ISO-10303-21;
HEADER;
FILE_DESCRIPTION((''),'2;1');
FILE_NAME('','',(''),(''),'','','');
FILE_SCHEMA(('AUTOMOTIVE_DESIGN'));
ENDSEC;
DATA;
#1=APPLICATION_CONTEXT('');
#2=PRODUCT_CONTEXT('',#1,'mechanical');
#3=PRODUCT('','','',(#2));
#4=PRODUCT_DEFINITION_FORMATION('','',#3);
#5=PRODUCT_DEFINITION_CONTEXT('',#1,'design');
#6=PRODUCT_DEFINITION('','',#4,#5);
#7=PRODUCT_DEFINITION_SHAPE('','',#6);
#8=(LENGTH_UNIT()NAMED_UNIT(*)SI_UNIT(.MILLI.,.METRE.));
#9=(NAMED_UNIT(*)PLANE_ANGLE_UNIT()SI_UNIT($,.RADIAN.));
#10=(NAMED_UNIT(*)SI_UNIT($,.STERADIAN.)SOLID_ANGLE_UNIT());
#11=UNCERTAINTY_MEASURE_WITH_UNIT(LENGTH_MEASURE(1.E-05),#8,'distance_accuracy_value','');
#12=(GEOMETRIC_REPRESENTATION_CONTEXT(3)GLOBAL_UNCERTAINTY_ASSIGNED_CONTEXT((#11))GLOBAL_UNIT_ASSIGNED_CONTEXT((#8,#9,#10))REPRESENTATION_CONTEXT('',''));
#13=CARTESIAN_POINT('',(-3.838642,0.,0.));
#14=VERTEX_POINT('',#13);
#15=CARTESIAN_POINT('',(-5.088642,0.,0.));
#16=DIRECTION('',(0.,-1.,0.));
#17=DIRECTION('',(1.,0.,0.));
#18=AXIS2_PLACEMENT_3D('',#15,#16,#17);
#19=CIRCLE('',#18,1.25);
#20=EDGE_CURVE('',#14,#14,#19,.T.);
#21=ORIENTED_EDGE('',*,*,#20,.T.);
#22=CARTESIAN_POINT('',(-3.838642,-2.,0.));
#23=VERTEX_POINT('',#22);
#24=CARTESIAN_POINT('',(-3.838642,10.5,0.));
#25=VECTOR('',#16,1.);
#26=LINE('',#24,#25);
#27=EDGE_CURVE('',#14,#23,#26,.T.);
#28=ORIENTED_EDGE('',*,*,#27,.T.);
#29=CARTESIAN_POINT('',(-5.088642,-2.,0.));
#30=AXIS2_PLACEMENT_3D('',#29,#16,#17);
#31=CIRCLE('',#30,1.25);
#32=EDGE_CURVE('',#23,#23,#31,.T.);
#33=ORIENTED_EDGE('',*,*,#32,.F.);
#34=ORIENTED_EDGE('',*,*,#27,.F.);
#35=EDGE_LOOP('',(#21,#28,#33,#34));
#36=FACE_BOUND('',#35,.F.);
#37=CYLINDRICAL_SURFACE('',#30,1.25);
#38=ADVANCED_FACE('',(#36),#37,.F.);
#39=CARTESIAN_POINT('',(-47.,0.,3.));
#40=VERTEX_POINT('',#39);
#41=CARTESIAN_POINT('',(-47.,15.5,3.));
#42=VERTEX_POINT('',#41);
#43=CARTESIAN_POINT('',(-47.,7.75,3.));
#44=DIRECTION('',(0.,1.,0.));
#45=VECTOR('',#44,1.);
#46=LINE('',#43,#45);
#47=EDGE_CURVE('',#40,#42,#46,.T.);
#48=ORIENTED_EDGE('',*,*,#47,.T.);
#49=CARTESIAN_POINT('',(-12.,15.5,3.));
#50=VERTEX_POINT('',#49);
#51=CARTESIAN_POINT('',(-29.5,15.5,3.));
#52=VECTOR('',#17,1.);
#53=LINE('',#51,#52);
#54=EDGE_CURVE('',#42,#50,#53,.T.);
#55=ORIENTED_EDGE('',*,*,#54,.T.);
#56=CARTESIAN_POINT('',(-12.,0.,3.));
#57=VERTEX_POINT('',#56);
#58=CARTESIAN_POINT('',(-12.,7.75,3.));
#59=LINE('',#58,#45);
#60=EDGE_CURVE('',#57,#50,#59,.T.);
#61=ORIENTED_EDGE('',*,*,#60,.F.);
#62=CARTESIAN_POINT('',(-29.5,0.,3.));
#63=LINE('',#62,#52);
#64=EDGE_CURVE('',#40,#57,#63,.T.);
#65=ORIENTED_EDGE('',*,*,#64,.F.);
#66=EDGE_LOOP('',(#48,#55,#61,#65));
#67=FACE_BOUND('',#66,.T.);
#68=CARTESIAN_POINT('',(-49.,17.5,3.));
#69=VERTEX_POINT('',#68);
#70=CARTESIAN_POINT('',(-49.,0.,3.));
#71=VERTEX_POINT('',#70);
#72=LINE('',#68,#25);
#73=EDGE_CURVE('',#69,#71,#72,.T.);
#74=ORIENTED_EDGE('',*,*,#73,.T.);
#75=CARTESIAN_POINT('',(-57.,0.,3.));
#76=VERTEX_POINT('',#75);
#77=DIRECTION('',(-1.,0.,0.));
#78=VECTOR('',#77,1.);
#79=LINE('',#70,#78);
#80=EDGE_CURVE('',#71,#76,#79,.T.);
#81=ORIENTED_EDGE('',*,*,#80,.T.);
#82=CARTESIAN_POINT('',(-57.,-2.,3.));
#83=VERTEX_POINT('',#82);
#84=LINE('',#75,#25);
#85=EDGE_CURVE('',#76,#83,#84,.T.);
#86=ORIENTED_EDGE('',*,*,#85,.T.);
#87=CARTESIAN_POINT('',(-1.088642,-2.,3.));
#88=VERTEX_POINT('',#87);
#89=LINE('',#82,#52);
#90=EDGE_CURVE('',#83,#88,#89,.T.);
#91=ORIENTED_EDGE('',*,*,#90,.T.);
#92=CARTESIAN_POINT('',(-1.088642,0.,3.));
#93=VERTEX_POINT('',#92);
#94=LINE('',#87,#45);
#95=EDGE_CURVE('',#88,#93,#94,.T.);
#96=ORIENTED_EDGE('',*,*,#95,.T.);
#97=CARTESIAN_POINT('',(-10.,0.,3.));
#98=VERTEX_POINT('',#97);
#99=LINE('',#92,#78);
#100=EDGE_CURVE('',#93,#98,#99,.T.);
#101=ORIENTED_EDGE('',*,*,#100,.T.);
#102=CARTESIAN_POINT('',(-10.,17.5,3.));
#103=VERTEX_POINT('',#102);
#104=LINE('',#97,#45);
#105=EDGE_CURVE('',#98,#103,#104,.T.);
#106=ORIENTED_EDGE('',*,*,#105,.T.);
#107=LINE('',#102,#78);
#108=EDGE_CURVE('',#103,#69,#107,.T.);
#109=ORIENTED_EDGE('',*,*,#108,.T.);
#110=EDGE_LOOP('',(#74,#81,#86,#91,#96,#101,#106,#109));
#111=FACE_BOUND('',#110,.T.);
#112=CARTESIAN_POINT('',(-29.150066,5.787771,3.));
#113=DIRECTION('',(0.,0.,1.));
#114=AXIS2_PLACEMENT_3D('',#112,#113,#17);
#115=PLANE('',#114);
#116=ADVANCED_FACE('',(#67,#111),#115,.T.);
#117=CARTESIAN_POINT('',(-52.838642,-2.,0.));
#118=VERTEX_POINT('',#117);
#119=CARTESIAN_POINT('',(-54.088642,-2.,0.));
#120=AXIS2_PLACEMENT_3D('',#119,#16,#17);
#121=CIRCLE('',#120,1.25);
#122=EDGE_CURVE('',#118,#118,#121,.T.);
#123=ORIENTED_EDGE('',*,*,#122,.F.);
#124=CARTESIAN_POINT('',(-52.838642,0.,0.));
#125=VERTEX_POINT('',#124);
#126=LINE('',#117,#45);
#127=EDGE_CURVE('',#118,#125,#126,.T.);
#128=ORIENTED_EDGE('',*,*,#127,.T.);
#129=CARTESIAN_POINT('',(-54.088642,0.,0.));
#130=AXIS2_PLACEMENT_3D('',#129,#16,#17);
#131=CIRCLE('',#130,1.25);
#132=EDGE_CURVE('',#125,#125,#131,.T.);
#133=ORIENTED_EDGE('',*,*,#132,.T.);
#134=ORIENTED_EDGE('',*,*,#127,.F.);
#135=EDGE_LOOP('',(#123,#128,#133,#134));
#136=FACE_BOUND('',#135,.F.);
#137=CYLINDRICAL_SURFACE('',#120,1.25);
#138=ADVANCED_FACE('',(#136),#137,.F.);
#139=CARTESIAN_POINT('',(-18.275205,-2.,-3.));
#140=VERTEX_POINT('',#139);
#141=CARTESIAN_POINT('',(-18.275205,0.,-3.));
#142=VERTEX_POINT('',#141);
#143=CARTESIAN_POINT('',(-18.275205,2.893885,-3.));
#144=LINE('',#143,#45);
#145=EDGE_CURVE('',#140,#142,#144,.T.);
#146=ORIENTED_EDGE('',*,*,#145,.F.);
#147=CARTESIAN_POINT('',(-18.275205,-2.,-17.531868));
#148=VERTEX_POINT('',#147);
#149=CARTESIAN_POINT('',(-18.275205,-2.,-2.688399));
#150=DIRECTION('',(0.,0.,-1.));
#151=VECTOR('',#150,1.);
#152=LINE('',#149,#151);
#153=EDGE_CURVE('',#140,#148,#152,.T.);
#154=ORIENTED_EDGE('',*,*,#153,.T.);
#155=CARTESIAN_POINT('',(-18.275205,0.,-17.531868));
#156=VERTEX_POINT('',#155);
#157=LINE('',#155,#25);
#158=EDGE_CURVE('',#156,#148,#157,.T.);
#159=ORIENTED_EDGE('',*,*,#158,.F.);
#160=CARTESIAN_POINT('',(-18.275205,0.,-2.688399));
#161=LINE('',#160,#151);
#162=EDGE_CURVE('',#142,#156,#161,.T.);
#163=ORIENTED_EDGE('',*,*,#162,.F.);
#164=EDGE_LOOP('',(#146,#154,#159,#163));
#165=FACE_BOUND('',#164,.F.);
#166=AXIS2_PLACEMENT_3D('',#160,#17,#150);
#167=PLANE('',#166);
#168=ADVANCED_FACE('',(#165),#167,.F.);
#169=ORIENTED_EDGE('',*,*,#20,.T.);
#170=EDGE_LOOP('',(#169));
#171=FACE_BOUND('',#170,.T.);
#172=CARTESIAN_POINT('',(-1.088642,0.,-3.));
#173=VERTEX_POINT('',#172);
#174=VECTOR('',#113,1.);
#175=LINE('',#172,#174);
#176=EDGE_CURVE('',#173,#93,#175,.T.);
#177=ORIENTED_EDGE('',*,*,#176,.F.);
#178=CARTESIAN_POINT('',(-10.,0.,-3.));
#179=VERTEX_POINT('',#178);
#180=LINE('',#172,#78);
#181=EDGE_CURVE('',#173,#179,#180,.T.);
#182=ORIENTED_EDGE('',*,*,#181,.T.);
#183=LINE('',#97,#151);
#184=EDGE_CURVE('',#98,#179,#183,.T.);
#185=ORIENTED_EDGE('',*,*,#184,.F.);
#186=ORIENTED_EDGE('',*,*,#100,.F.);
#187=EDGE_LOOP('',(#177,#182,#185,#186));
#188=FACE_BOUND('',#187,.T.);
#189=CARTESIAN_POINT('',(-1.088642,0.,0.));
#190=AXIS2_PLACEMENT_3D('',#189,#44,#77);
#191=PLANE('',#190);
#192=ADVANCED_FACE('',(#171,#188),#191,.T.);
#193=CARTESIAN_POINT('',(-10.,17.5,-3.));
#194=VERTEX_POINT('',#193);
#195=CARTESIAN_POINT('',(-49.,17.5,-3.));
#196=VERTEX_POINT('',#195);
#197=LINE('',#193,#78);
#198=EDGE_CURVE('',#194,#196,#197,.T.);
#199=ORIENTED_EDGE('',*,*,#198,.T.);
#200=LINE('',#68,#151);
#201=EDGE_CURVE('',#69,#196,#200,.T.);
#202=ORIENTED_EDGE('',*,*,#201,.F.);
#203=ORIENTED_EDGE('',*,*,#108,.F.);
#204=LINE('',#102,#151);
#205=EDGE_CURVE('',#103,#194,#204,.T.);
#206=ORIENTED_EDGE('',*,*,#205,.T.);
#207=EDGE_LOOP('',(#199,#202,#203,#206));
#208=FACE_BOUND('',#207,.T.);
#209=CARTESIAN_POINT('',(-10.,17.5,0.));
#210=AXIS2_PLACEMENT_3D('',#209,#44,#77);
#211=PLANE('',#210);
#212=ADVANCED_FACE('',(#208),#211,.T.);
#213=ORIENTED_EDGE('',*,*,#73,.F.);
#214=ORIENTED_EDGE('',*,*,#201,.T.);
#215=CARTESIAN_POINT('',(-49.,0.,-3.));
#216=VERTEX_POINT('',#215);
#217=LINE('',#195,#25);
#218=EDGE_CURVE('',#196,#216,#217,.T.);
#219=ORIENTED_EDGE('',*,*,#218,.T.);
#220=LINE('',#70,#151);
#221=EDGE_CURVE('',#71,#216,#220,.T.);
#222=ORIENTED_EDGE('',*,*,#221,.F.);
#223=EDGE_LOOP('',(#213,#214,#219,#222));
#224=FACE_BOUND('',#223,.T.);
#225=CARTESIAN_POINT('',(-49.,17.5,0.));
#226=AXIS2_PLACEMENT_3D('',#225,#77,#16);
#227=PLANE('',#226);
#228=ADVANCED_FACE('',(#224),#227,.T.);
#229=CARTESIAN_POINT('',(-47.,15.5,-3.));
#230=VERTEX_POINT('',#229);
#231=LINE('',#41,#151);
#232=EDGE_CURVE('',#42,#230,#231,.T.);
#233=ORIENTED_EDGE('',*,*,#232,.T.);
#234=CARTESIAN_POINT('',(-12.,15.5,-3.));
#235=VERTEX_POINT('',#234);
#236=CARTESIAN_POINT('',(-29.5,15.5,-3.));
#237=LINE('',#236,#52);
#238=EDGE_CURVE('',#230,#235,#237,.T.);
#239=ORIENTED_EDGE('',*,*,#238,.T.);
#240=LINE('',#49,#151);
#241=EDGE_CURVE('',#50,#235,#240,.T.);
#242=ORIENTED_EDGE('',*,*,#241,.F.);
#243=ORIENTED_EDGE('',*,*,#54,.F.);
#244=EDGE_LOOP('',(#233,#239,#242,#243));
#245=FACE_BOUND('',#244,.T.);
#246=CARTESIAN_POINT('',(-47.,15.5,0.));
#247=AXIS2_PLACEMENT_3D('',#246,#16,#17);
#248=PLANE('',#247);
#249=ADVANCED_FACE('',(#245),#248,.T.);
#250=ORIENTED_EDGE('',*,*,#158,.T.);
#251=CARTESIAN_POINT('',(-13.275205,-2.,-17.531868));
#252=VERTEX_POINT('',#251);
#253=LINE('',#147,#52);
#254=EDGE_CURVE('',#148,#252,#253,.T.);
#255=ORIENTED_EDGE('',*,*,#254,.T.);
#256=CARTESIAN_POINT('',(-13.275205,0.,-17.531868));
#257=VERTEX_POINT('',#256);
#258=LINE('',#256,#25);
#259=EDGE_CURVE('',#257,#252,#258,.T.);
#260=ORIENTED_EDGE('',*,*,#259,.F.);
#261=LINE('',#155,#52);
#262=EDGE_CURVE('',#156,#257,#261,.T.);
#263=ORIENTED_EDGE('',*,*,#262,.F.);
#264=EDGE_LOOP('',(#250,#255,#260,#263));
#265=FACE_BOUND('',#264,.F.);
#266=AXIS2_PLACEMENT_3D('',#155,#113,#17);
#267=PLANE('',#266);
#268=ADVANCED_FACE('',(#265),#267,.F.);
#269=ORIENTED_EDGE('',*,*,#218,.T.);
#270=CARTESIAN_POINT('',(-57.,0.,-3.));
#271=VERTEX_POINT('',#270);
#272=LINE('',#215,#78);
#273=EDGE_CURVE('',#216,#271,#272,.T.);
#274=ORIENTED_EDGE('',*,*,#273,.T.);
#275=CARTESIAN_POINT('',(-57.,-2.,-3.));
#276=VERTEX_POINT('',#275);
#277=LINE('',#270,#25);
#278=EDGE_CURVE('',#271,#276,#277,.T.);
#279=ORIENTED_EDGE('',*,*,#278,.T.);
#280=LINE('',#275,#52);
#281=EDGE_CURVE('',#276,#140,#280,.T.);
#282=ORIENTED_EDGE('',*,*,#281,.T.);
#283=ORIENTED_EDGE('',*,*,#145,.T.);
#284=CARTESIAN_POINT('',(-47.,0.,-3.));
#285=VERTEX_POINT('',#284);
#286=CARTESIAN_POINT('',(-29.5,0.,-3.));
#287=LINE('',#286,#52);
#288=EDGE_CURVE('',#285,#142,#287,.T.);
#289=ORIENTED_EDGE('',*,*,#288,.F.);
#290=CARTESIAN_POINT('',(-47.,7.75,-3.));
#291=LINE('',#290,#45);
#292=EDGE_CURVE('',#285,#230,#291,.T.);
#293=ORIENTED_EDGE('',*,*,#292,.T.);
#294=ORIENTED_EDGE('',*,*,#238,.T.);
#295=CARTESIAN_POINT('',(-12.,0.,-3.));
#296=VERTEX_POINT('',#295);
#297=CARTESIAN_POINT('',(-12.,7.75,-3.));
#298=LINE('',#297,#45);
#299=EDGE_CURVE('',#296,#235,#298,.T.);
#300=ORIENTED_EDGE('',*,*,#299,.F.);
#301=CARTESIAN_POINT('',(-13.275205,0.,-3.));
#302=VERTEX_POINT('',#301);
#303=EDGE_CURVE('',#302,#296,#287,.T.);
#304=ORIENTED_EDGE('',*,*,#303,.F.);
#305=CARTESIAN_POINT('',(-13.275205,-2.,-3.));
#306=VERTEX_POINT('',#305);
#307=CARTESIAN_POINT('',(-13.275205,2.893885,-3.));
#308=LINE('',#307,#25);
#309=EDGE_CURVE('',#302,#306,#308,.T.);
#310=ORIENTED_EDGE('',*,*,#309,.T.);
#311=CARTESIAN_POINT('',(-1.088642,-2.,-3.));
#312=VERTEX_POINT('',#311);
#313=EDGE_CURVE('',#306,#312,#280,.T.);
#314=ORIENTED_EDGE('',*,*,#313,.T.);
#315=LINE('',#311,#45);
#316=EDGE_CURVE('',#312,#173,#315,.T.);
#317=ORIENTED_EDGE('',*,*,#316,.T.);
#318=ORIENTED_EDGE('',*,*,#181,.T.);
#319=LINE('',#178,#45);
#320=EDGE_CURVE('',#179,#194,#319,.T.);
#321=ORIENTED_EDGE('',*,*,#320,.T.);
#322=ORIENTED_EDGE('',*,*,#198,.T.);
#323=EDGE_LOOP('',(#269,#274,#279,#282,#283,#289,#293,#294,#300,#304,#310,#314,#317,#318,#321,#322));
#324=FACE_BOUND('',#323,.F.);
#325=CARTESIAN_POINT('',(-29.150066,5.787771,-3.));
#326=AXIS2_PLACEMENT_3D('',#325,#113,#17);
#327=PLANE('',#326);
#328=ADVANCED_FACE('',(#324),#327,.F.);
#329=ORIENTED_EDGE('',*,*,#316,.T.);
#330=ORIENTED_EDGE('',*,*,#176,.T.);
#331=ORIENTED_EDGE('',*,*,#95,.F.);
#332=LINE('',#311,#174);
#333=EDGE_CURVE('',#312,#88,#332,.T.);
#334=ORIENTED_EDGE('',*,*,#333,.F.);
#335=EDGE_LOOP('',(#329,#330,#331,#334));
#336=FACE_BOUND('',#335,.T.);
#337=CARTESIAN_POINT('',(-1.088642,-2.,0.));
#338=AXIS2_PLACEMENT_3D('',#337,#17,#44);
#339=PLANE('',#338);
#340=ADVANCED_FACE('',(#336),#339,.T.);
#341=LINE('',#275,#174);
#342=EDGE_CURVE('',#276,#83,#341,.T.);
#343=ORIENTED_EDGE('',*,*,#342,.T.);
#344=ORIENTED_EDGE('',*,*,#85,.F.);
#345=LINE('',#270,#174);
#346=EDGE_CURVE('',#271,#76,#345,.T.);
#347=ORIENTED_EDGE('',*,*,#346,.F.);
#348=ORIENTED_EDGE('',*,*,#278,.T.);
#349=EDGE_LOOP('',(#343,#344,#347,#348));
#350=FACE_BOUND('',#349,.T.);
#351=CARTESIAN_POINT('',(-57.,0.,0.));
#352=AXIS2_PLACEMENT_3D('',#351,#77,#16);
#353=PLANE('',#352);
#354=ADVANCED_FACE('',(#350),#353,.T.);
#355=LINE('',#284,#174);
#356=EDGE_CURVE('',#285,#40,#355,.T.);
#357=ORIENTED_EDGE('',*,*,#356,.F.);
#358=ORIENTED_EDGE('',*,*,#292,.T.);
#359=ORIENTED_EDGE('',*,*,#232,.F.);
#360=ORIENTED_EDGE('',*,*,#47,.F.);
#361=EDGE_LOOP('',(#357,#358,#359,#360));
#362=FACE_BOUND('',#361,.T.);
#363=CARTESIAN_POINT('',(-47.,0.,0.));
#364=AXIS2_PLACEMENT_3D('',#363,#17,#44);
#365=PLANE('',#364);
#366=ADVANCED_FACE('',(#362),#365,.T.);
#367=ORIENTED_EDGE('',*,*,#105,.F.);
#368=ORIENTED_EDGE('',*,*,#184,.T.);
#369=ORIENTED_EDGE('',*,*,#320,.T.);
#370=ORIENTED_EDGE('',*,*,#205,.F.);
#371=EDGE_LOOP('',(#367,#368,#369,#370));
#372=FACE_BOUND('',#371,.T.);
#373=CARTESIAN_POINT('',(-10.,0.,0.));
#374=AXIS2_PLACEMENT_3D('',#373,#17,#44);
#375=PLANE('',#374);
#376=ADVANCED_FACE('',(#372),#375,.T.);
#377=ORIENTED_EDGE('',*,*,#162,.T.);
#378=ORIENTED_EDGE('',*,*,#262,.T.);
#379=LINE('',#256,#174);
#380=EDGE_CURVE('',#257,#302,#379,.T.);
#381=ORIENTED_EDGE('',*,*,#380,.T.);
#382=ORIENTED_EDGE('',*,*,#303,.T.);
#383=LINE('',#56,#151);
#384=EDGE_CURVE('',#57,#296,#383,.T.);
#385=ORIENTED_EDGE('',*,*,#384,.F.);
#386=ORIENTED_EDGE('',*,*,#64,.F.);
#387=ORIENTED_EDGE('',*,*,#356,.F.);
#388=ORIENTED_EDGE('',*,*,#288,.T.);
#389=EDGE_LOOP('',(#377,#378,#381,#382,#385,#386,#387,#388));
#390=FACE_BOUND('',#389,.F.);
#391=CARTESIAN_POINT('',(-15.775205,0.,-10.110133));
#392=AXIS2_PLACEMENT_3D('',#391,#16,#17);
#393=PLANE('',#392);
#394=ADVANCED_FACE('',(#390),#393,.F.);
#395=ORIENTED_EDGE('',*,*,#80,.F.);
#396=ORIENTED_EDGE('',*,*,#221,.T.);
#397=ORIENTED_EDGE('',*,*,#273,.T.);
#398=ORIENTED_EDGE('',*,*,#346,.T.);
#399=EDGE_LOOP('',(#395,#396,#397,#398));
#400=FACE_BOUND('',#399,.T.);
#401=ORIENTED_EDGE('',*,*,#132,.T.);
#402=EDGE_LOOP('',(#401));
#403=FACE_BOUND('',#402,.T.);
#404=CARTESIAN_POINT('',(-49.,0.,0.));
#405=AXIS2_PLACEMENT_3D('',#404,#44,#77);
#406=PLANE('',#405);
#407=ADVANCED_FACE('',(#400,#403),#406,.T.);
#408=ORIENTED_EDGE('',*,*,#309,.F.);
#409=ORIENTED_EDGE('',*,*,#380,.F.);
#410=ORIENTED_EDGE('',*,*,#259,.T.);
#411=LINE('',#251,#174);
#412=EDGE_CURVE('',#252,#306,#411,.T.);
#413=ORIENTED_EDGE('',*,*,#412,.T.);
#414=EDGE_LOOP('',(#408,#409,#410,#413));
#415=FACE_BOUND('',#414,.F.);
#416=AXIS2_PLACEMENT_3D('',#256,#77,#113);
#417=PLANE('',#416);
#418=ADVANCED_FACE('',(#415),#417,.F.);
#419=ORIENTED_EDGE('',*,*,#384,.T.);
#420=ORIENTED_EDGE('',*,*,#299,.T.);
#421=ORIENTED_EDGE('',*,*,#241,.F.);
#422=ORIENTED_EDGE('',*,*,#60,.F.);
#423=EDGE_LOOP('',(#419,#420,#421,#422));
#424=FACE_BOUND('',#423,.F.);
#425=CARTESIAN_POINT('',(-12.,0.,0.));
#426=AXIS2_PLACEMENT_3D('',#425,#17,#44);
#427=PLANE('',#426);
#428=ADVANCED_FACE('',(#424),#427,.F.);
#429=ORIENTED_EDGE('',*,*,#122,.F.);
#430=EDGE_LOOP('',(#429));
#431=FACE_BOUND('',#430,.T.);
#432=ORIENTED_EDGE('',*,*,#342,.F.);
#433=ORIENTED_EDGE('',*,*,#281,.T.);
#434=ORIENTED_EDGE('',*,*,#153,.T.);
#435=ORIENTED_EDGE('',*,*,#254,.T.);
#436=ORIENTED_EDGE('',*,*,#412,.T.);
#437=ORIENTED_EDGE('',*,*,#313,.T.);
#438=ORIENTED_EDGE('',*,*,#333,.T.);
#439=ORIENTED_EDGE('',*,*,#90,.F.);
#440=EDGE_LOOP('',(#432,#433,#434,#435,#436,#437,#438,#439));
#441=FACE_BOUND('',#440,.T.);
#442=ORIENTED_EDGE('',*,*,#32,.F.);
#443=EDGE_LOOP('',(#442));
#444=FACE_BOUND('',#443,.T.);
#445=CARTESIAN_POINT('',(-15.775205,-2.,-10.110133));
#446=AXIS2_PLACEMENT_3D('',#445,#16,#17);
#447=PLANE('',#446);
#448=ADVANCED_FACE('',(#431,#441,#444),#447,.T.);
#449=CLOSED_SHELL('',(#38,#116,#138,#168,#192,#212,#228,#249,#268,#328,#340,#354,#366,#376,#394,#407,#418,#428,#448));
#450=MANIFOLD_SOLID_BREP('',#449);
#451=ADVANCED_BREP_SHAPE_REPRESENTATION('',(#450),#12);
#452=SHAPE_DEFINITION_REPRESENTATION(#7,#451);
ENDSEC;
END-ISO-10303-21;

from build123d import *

# Parameters (mm, degrees)
F0_W     = 35
F0_H     = 15.5
F1_DEPTH = 3
F2_R     = 1.25
F3_DEPTH = 12.5
F5_DEPTH = 2


# Not quite as in the source:
# - a feature names something its author has since deleted; it is built from what else it names


with BuildPart() as f1:
    # F0 (on Top) → F1 (new body, symmetric)
    with BuildSketch(Plane.XY):
        Polygon((-49, 0), (-57, 0), (-57, -2), (-1.0886418074, -2), (-1.0886418074, 0), (-10, 0), (-10, 17.5), (-49, 17.5), align=None)
        with Locations((-29.5, 7.75)):
            Rectangle(F0_W, F0_H, mode=Mode.SUBTRACT)
    extrude(amount=F1_DEPTH, both=True)

    # F2 (on face) → F3 (cut, symmetric)
    with BuildSketch(Plane.XZ.offset(2)):
        with Locations((-54.0886418074, 0)):
            Circle(F2_R)
        with Locations((-5.0886418074, 0)):
            Circle(F2_R)
    extrude(amount=F3_DEPTH, both=True, mode=Mode.SUBTRACT)

    # F4 (on Front) → F5 (join)
    with BuildSketch(Plane.XZ):
        Polygon((-13.2752051018, -17.5318677962), (-13.2752051018, -2.6883990917), (-18.2752051018, -2.6883990917), (-18.2752051018, -3.858309805), (-18.2752051018, -17.5318677962), align=None)
    extrude(amount=F5_DEPTH)


solid = f1.part
